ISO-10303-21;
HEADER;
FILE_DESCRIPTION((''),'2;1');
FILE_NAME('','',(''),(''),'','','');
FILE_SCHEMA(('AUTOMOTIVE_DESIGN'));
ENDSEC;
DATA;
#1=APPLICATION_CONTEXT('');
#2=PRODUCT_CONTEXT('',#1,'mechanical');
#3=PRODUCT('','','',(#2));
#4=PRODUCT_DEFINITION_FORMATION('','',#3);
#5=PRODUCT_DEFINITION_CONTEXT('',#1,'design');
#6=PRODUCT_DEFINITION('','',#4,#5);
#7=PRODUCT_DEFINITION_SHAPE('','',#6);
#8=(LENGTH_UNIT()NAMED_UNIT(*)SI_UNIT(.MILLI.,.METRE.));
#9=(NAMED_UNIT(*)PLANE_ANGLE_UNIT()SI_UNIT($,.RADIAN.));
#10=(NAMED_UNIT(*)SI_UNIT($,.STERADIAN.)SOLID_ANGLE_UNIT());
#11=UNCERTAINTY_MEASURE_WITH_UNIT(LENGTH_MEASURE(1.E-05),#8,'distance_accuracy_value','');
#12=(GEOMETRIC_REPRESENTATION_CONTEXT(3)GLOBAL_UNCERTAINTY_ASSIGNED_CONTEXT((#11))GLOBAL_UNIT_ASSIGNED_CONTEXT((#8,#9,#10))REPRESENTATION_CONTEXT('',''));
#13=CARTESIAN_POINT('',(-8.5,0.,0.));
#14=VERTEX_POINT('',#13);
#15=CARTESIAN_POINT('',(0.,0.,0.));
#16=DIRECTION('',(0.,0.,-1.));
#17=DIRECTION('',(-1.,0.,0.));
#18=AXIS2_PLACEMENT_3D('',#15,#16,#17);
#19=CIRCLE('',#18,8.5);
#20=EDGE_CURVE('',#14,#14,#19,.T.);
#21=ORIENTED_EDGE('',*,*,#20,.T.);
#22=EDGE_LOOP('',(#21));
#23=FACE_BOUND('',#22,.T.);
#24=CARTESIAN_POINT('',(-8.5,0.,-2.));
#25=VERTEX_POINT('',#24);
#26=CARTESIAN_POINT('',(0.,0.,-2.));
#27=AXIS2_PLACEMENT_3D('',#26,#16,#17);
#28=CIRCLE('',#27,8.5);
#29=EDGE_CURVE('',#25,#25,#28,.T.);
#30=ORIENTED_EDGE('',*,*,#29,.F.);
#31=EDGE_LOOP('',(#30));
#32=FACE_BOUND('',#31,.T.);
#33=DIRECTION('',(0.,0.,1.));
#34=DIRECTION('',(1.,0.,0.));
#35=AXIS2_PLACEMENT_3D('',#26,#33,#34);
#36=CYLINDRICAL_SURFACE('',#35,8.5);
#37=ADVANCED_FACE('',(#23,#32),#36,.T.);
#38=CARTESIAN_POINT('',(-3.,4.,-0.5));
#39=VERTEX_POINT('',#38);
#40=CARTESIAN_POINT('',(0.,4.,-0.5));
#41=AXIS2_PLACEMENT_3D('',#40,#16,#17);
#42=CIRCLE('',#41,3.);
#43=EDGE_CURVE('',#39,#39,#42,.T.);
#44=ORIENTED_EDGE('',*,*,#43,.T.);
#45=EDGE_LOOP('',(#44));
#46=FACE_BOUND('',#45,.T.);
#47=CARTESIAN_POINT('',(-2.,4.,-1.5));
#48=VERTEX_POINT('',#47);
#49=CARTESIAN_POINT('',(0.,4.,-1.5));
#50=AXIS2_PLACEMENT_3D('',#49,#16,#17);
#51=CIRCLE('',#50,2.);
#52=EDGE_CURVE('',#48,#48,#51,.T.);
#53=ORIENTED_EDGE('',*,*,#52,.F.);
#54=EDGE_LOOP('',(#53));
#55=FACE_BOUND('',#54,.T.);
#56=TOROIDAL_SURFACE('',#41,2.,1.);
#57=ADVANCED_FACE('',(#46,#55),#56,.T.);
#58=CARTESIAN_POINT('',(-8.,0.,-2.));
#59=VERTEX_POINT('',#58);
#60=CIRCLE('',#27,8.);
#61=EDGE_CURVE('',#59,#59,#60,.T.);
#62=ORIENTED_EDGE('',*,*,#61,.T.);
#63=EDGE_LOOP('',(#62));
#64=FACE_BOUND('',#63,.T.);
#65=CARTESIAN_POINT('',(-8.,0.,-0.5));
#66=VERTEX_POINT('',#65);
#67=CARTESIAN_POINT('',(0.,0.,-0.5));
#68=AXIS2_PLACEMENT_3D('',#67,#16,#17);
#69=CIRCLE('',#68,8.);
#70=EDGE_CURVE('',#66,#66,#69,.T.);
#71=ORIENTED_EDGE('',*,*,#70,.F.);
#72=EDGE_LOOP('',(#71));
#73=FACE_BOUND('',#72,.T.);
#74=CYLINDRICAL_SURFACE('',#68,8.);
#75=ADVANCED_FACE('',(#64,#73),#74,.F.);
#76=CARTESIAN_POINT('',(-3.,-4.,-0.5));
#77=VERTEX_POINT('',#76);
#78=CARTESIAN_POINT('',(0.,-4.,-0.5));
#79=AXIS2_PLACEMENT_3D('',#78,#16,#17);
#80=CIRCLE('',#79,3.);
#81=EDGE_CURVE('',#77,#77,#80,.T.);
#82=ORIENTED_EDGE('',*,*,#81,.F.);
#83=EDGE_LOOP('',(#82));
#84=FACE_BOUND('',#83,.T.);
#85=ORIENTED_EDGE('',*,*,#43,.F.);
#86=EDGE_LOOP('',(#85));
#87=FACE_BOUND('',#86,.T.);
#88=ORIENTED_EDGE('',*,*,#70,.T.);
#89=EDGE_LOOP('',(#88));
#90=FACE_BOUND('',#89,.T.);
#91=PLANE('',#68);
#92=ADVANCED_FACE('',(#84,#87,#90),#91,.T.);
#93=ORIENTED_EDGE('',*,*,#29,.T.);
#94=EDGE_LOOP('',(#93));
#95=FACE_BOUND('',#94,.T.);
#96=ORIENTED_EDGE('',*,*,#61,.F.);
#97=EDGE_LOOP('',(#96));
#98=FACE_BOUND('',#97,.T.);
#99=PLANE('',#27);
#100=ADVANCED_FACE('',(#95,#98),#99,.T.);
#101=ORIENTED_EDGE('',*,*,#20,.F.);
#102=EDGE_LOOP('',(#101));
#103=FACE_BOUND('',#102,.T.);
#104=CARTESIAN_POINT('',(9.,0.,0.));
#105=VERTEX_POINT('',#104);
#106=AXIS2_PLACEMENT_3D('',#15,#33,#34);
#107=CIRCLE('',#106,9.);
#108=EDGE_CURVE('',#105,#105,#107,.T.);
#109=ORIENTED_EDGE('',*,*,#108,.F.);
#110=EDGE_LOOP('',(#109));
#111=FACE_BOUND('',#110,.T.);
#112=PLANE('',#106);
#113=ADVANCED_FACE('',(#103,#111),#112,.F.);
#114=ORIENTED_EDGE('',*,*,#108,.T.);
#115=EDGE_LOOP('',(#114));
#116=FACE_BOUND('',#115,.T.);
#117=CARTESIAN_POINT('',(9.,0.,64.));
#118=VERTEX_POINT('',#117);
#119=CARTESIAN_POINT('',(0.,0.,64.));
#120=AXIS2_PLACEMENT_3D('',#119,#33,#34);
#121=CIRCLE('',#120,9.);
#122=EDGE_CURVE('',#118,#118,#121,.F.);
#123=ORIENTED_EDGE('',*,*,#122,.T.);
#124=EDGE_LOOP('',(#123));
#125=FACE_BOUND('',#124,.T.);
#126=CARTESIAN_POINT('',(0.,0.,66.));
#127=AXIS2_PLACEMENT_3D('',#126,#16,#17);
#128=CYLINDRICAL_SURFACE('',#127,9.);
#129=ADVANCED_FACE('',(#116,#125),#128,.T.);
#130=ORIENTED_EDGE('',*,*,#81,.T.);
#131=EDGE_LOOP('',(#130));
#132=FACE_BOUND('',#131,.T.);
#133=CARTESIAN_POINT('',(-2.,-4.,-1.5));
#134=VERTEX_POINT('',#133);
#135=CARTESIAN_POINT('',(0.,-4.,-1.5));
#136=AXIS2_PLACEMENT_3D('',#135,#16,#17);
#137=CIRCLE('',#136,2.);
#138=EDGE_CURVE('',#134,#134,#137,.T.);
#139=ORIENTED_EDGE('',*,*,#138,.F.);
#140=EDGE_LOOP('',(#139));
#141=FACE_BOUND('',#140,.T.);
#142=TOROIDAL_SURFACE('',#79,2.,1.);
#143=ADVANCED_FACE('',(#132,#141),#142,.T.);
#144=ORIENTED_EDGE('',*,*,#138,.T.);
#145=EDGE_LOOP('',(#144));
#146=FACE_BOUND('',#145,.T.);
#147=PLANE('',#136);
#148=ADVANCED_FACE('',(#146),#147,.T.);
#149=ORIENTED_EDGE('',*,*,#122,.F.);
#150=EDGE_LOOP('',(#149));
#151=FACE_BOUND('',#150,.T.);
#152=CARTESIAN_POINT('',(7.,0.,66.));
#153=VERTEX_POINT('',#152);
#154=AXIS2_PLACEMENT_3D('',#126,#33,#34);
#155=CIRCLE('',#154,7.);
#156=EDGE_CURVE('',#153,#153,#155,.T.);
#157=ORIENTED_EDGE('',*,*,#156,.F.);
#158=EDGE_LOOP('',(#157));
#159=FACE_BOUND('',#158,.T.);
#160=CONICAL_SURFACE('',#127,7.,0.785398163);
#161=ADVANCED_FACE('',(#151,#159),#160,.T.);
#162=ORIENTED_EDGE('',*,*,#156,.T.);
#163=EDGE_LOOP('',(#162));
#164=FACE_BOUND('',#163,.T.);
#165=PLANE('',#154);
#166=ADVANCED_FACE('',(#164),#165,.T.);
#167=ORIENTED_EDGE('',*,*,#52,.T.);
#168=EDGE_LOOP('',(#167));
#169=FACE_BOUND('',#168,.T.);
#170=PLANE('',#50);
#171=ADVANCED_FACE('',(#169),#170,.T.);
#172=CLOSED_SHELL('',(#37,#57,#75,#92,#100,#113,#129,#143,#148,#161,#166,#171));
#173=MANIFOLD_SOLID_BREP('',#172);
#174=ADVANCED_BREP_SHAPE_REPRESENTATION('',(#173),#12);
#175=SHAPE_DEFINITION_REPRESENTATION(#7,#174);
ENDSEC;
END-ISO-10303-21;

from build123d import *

# Parameters (mm, degrees)
SKETCH1_R           = 9
BOSS_EXTRUDE1_DEPTH = 66
SKETCH2_R           = 8.5
BOSS_EXTRUDE2_DEPTH = 2
SKETCH3_R           = 8
CUT_EXTRUDE1_DEPTH  = 1.5
SKETCH4_R           = 3
BOSS_EXTRUDE3_DEPTH = 1
FILLET1_R           = 1
CHAMFER1_SIZE       = 2


with BuildPart() as part:
    # Sketch1 → Boss-Extrude1 (new body)
    with BuildSketch(Plane.XY):
        Circle(SKETCH1_R)
    extrude(amount=BOSS_EXTRUDE1_DEPTH)

    # Sketch2 → Boss-Extrude2 (add)
    with BuildSketch(Plane(origin=(0, 0, 0), x_dir=(-1, 0, 0), z_dir=(0, 0, -1))):
        Circle(SKETCH2_R)
    extrude(amount=BOSS_EXTRUDE2_DEPTH)

    # Sketch3 → Cut-Extrude1 (cut)
    with BuildSketch(Plane(origin=(0, 0, -2), x_dir=(-1, 0, 0), z_dir=(0, 0, -1))):
        Circle(SKETCH3_R)
    extrude(amount=-CUT_EXTRUDE1_DEPTH, mode=Mode.SUBTRACT)

    # Sketch4 → Boss-Extrude3 (add)
    with BuildSketch(Plane(origin=(0, 0, -0.5), x_dir=(-1, 0, 0), z_dir=(0, 0, -1))):
        with Locations((0, 4)):
            Circle(SKETCH4_R)
        with Locations((0, -4)):
            Circle(SKETCH4_R)
    extrude(amount=BOSS_EXTRUDE3_DEPTH)

    # Fillet1
    fillet1_edges = [part.edges().sort_by_distance(p)[0] for p in [
        (3, 4, -1.5),
        (3, -4, -1.5),
    ]]
    fillet(fillet1_edges, radius=FILLET1_R - 0.0001)  # a hair under: the kernel refuses the full size

    # Chamfer1
    chamfer1_edges = [part.edges().sort_by_distance(p)[0] for p in [
        (-9, 0, 66),
    ]]
    chamfer(chamfer1_edges, length=CHAMFER1_SIZE)


solid = part.part
